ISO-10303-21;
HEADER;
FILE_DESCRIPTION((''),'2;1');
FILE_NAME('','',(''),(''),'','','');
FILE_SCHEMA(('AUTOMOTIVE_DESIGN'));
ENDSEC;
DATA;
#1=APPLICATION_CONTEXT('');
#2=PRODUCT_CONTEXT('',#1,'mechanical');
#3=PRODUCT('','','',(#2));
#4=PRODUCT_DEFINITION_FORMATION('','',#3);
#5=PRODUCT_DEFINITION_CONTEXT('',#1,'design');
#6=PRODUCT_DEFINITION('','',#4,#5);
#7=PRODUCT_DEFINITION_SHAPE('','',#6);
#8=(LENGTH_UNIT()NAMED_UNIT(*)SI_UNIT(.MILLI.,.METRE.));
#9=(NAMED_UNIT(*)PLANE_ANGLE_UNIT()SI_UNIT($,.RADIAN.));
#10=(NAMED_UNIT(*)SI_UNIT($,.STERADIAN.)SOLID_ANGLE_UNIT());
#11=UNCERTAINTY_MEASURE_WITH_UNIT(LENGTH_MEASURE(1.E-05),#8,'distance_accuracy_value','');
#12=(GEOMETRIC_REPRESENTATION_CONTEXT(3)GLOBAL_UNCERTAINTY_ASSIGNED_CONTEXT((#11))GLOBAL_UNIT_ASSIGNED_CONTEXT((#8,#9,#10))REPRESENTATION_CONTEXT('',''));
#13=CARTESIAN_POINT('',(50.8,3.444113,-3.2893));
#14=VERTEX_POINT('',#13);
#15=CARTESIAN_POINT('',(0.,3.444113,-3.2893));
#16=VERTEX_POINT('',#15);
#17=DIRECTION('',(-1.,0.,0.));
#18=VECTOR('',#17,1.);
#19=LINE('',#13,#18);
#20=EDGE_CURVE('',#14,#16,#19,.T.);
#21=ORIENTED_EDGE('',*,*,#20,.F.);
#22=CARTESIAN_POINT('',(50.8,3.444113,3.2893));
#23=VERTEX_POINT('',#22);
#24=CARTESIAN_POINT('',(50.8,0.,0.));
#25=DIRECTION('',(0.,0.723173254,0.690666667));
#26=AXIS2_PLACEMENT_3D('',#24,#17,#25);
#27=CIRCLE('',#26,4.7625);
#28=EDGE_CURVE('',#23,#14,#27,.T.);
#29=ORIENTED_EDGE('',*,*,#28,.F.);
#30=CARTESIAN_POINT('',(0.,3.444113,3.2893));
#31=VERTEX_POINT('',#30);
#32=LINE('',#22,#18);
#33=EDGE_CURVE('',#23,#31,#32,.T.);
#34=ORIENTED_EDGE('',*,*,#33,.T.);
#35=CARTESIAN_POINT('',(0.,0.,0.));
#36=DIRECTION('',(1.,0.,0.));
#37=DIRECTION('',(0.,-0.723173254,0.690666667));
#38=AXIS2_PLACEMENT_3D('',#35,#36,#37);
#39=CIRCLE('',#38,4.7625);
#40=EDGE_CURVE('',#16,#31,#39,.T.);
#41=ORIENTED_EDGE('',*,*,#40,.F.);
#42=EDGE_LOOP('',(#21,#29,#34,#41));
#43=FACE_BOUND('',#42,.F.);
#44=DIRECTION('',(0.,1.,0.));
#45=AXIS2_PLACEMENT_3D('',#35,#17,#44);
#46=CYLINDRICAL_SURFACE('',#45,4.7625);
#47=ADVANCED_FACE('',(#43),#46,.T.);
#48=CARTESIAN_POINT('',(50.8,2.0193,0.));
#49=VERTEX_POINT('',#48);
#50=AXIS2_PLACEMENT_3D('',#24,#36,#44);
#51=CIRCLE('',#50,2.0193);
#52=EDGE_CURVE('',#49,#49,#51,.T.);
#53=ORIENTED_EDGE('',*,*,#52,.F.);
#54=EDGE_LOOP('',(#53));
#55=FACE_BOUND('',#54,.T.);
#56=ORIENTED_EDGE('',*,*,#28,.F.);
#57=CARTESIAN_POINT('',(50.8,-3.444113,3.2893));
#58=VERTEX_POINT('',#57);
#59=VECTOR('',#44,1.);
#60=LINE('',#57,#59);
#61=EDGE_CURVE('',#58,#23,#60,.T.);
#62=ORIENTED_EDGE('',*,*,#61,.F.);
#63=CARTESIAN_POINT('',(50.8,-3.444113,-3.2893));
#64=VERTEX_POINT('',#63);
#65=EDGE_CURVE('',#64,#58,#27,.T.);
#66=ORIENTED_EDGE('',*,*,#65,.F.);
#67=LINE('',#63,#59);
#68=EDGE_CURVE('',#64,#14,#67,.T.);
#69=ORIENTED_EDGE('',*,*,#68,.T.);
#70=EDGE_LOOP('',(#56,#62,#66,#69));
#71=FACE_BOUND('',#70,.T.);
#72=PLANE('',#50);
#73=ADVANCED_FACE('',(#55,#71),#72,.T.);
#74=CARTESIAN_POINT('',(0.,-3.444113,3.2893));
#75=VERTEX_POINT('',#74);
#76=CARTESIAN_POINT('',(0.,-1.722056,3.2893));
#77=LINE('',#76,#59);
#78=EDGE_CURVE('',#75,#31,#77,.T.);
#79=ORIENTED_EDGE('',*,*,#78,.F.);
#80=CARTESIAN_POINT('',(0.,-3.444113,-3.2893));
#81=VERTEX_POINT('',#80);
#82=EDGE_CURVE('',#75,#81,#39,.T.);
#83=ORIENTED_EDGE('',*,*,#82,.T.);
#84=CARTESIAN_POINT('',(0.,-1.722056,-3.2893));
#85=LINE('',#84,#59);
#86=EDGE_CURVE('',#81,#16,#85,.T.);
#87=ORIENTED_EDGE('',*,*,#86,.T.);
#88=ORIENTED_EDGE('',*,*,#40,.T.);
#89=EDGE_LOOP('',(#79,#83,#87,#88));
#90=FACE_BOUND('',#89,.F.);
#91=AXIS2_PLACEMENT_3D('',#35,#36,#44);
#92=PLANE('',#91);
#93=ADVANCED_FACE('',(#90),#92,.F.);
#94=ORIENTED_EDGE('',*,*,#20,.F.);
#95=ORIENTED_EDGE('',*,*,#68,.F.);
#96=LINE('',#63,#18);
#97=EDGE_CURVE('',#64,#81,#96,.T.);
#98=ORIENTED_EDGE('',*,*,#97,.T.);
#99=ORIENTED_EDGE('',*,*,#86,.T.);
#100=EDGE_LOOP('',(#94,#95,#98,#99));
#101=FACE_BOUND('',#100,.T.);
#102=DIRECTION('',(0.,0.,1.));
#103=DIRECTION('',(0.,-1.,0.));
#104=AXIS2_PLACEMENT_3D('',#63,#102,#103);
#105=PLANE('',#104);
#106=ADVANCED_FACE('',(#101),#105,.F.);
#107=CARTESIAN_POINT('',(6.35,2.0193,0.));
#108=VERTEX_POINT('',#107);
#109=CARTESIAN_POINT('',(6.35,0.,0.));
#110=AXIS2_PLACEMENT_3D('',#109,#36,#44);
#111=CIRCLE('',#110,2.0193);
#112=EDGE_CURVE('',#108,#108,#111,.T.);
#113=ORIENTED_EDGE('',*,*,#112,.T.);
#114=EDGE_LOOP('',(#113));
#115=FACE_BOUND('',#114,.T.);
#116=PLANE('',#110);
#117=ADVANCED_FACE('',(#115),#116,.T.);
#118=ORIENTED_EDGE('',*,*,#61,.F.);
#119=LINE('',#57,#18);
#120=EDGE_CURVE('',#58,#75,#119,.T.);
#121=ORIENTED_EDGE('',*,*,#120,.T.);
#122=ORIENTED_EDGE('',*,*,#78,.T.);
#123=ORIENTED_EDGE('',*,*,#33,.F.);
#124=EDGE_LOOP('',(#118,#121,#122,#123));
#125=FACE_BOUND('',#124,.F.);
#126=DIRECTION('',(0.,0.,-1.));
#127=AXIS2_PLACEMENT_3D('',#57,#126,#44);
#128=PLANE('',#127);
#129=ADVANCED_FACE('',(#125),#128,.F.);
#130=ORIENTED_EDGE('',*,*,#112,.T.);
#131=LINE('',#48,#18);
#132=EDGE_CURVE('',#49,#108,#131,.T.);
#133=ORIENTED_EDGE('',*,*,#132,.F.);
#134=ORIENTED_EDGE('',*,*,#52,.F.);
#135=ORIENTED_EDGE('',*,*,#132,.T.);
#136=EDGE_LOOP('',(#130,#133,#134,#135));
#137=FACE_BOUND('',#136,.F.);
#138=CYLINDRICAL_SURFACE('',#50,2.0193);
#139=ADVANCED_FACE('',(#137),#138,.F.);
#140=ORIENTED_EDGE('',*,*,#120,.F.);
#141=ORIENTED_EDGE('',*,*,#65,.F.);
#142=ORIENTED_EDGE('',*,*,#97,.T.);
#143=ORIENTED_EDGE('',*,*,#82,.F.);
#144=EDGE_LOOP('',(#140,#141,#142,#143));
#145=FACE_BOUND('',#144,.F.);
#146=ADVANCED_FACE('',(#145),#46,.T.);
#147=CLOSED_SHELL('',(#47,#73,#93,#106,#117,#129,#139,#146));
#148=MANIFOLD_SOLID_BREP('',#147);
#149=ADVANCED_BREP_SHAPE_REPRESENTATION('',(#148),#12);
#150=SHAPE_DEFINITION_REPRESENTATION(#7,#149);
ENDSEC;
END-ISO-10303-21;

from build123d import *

# Parameters (mm, degrees)
F0_R     = 4.7625
F1_DEPTH = 50.8
F3_DEPTH = 50.801
F4_R     = 2.0193
F5_DEPTH = 44.45


# Not quite as in the source:
# - a pattern or mirror of a feature is missing from the dataset's text; its kind, count and spacing are read off the source's solid


with BuildPart() as f1:
    # F0 (on Right) → F1 (new body)
    with BuildSketch(Plane.YZ):
        Circle(F0_R)
    extrude(amount=F1_DEPTH)

    # F2 (on face) → F3 (cut, through all)
    with BuildSketch(Plane.YZ.offset(50.8)):
        with BuildLine():
            Line((-3.444112623, 3.2893), (3.444112623, 3.2893))
            ThreePointArc((3.444112623, 3.2893), (0, 4.7625), (-3.444112623, 3.2893))
        make_face()
    f3 = extrude(amount=-F3_DEPTH, mode=Mode.SUBTRACT)

    # F3_copies: F3 across plane
    add(f3.mirror(Plane(origin=(0, 0, 0), x_dir=(-1, 0, 0), z_dir=(0, 0, -1))), mode=Mode.SUBTRACT)

    # F4 (on face) → F5 (cut)
    with BuildSketch(Plane.YZ.offset(50.8)):
        Circle(F4_R)
    extrude(amount=-F5_DEPTH, mode=Mode.SUBTRACT)


solid = f1.part
